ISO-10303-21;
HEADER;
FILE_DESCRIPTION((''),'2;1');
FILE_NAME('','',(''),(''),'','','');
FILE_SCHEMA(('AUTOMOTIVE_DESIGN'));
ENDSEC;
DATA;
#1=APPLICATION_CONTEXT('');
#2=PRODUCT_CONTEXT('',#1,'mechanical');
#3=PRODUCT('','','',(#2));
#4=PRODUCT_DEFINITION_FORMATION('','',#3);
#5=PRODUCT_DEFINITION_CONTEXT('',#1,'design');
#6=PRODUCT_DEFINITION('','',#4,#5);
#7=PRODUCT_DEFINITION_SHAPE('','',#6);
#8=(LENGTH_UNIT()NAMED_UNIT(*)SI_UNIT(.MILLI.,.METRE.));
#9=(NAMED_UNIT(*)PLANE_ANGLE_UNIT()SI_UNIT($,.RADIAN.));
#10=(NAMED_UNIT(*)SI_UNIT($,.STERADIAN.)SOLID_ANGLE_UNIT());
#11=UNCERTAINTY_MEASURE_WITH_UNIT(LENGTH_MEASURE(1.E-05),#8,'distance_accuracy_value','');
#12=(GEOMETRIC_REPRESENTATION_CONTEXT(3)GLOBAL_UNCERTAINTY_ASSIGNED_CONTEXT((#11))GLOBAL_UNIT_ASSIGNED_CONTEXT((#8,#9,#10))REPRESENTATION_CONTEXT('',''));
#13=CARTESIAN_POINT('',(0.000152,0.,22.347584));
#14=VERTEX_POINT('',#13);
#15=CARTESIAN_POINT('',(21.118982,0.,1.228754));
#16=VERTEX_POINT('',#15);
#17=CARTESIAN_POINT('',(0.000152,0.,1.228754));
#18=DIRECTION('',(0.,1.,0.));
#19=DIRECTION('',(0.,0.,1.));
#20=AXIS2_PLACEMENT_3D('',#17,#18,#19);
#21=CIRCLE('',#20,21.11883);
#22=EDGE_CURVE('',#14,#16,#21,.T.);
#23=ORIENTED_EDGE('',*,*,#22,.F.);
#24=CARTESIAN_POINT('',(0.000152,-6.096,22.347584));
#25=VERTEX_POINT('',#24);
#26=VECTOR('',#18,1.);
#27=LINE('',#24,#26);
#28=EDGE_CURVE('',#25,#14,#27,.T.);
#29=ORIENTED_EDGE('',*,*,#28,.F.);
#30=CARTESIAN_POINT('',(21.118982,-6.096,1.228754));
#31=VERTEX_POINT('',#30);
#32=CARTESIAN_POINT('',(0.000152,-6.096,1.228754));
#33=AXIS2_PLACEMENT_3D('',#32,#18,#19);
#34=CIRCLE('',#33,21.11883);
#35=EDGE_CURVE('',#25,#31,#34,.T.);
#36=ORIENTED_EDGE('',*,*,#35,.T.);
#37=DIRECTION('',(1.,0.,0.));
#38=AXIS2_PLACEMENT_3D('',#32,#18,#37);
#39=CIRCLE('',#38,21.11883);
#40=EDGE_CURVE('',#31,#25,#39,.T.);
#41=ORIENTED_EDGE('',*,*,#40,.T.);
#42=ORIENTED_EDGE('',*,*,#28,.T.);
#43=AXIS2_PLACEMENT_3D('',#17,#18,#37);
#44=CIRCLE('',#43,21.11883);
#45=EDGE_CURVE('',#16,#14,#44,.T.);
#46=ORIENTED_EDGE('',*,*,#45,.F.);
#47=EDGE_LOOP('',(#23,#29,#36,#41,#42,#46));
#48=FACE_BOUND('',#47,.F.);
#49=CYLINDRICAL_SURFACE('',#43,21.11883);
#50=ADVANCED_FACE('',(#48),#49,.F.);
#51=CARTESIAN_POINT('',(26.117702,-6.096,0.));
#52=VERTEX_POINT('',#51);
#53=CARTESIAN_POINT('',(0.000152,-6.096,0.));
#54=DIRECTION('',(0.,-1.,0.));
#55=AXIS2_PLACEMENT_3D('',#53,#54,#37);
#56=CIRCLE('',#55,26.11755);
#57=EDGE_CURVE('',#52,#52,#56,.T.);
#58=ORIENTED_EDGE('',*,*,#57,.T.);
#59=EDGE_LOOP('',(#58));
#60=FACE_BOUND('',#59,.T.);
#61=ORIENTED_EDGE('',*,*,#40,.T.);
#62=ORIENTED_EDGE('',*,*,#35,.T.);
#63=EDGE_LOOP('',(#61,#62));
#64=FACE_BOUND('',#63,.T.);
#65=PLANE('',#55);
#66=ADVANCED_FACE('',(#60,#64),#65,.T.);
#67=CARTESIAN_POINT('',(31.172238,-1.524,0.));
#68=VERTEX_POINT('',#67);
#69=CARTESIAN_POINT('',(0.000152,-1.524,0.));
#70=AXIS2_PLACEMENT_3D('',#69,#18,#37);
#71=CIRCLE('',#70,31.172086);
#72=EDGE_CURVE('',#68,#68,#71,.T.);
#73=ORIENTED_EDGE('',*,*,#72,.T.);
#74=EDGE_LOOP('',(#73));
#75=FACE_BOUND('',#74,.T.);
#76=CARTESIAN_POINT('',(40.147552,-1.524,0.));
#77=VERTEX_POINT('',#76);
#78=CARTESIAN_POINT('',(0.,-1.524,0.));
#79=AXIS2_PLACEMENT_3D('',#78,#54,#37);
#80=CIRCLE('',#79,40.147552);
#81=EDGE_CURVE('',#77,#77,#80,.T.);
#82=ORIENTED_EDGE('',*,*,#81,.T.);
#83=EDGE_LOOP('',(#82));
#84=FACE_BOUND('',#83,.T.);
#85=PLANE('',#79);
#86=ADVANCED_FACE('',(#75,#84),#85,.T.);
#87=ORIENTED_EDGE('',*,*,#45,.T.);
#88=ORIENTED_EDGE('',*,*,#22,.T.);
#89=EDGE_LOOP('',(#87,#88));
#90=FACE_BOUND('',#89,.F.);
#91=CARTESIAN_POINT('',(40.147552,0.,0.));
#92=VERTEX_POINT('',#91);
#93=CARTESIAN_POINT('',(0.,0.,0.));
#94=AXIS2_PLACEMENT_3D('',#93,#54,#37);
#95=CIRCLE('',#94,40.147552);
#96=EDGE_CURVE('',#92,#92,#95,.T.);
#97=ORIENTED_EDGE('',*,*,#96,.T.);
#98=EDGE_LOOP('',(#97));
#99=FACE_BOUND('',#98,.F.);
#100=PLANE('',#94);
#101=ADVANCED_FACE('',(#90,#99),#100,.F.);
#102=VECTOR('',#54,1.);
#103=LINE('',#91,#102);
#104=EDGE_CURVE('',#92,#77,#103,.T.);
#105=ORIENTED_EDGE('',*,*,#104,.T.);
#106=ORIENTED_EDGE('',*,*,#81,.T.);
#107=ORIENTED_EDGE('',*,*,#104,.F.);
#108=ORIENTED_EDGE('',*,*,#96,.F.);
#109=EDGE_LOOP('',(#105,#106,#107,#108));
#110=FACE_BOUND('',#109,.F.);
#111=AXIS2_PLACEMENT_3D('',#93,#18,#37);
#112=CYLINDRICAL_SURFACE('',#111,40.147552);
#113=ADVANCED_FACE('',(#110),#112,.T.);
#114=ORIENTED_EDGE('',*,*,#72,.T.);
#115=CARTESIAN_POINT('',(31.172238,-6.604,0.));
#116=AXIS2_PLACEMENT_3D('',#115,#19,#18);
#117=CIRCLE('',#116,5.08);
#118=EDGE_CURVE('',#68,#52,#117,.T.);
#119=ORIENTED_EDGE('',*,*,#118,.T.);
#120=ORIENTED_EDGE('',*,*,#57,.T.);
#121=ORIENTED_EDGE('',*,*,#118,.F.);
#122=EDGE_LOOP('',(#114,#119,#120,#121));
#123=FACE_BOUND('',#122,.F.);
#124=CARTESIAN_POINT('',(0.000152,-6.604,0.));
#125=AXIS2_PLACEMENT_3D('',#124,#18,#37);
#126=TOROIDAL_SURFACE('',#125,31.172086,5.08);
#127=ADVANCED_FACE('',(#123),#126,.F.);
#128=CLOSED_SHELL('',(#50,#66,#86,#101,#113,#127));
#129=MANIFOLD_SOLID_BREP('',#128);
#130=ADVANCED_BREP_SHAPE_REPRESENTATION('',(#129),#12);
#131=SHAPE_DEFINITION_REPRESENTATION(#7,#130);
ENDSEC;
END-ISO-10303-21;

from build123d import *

# Parameters (mm, degrees)
F0_R     = 40.1475524572
F0_R_2   = 26.11755
F1_DEPTH = 1.524
F2_DEPTH = 6.096


# Not quite as in the source:
# - a fillet or chamfer that OpenCascade refuses, or shapes differently, is made with other operations: its cross-section is extruded or revolved along the edge and cut away or added


with BuildPart() as f1:
    # F0 (on Front) → F1 (new body)
    with BuildSketch(Plane.XZ):
        Circle(F0_R)
        with Locations((0.0001517863, 0)):
            Circle(F0_R_2, mode=Mode.SUBTRACT)
        with Locations((0.0001517863, 0)):
            Circle(F0_R_2)
        with BuildLine():
            ThreePointArc((0.0001517863, 22.3475835458), (14.93341969, 16.1620214495), (21.1189817863, 1.2287535458))
            ThreePointArc((21.1189817863, 1.2287535458), (-14.9331161175, -13.704514358), (0.0001517863, 22.3475835458))
        make_face(mode=Mode.SUBTRACT)
    extrude(amount=F1_DEPTH)

    # F0 (on Front) → F2 (join)
    with BuildSketch(Plane.XZ):
        with Locations((0.0001517863, 0)):
            Circle(F0_R_2)
        with BuildLine():
            ThreePointArc((0.0001517863, 22.3475835458), (14.93341969, 16.1620214495), (21.1189817863, 1.2287535458))
            ThreePointArc((21.1189817863, 1.2287535458), (-14.9331161175, -13.704514358), (0.0001517863, 22.3475835458))
        make_face(mode=Mode.SUBTRACT)
    extrude(amount=F2_DEPTH)

    # F3: fillet of radius 5.08 on 1 edges, made by hand

    # F3_s1 → F3_t2 (revolve)
    with BuildSketch(Plane.XY):
        with BuildLine():
            ThreePointArc((31.1722379668, -1.524), (27.764470369, -2.8365711686), (26.1177017863, -6.096))
            Line((26.1177017863, -6.096), (26.1177017863, -1.524))
            Line((26.1177017863, -1.524), (31.1722379668, -1.524))
        make_face()
    revolve(axis=Axis((0.0001517863, -1.524, 0), (0, 1, 0)))


solid = f1.part
